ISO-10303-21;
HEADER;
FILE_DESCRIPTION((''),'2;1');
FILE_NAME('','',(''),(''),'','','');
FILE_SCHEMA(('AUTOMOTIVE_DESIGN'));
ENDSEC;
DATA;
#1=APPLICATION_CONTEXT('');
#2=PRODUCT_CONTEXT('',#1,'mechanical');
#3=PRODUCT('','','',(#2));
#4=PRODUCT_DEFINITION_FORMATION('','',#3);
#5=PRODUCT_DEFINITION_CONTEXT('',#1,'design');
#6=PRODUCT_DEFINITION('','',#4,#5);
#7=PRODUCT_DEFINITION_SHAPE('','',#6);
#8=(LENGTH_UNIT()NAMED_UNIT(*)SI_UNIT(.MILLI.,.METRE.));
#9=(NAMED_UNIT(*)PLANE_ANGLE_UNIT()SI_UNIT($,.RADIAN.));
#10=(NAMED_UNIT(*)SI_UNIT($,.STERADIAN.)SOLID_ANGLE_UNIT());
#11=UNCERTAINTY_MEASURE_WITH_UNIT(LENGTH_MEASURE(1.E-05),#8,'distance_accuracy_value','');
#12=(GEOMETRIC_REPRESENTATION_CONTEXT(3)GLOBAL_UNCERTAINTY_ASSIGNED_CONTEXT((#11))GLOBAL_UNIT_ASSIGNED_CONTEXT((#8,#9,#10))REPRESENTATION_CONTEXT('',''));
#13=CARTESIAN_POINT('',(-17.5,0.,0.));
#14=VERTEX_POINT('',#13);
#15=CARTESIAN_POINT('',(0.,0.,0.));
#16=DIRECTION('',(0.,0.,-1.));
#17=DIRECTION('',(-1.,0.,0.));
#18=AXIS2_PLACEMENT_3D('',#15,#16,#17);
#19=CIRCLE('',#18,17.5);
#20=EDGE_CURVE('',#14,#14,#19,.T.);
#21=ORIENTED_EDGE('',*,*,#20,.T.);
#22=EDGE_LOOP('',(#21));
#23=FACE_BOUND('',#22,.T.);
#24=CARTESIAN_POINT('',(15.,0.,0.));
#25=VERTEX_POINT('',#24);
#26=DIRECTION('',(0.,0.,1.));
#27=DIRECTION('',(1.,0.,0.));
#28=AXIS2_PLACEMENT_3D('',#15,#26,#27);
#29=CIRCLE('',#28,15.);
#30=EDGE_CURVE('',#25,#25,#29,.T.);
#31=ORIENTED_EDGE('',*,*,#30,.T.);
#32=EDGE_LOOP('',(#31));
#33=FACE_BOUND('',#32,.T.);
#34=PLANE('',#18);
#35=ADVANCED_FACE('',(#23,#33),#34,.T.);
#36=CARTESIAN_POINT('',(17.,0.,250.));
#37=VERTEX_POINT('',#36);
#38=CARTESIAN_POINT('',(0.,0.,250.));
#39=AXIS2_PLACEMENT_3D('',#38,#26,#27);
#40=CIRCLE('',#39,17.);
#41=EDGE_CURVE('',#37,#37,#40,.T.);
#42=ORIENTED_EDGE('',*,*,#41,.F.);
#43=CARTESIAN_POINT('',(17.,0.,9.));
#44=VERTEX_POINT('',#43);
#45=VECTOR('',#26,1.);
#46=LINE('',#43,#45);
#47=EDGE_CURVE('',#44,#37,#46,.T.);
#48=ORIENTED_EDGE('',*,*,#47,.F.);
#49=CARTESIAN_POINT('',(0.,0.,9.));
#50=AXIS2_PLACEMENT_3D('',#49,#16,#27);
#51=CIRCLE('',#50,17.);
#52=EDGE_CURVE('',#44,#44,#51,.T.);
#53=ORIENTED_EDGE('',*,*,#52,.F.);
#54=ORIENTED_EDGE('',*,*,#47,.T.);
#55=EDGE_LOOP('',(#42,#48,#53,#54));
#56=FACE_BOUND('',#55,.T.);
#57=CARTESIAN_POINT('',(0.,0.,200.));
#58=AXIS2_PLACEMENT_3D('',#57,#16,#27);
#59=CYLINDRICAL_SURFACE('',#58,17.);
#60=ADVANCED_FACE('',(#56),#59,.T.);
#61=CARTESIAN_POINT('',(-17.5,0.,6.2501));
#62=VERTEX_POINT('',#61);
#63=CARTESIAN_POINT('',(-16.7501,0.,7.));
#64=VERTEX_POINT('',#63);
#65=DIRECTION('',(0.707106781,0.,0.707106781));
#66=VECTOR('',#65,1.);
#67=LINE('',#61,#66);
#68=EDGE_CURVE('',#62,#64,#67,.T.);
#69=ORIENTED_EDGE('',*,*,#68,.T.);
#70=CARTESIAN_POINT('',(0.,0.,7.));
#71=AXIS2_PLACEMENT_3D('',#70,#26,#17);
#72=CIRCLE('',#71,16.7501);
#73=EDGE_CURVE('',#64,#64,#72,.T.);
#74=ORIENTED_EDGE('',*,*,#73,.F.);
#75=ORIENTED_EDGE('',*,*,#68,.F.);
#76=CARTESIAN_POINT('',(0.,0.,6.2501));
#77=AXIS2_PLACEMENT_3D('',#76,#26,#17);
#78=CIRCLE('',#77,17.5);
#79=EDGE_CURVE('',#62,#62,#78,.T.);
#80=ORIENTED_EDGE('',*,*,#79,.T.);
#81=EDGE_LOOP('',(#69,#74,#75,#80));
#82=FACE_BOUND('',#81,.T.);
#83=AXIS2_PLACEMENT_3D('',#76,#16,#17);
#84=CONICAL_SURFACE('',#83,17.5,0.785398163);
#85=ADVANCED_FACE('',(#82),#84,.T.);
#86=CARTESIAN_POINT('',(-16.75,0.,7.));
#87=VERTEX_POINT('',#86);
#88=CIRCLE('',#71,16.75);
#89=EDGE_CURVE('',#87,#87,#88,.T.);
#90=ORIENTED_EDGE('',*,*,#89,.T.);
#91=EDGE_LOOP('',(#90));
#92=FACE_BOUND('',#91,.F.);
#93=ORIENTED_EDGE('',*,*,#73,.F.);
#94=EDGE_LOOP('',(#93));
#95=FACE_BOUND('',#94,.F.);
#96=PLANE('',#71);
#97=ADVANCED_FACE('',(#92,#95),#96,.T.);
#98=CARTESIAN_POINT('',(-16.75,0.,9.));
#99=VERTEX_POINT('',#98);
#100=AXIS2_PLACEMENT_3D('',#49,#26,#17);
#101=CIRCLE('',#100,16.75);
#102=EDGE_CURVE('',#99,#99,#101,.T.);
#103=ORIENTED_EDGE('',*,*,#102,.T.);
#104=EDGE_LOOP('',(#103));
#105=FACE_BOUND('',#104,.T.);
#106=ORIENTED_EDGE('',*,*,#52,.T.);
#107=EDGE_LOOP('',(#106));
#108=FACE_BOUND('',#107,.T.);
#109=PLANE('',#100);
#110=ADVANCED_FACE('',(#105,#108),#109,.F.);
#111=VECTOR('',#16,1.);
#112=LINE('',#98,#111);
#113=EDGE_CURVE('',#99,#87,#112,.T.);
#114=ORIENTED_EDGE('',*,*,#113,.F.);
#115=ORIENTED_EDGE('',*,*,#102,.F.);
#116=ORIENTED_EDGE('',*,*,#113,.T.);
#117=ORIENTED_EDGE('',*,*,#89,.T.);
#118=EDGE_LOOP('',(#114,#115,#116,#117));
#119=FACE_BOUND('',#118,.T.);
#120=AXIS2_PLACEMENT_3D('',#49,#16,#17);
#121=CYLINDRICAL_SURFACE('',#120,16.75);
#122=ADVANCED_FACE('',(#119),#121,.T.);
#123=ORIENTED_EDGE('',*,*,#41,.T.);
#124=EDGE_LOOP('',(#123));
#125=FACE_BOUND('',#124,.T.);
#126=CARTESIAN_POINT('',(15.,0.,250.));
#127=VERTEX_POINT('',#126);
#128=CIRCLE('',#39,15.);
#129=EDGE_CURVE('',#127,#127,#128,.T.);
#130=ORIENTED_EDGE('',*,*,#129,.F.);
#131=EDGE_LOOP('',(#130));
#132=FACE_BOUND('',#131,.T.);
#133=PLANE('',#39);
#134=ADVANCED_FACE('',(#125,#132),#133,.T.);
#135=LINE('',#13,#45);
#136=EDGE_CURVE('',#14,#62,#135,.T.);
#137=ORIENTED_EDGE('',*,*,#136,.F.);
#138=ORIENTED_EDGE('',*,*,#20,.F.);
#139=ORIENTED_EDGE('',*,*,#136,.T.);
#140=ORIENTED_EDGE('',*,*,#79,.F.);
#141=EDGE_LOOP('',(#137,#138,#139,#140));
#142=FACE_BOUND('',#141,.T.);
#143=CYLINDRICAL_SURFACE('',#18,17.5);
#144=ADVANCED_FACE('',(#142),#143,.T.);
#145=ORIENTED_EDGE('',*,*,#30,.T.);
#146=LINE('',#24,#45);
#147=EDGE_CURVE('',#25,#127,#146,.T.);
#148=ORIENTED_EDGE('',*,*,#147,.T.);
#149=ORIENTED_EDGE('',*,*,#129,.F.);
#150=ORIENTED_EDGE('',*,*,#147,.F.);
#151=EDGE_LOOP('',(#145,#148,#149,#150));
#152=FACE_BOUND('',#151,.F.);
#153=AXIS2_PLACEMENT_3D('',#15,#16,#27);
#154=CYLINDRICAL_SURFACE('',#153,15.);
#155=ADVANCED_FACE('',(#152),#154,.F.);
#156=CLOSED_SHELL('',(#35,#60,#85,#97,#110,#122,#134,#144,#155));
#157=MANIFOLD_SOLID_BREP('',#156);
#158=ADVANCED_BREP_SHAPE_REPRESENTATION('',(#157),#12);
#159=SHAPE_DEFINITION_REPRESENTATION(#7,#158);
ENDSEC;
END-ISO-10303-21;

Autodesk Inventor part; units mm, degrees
ref_plane "YZ Plane" through (0, 0, 0) normal (1, 0, 0) x (0, 1, 0)
ref_plane "XZ Plane" through (0, 0, 0) normal (0, 1, 0) x (-1, 0, 0)
ref_plane "XY Plane" through (0, 0, 0) normal (0, 0, 1) x (1, 0, 0)
sketch "Skizze1" plane through (0, 0, 0) normal (0, 0, 1) x (1, 0, 0)
  circle A0 centre (0, 0) radius 15
  circle A1 centre (0, 0) radius 17.5
  dimension "d0" = 35
  dimension "d1" = 2.5
extrude "Extrusion1" add sketch "Skizze1" along normal blind 250
sketch "Skizze2" plane through (0, 0, 250) normal (0, 0, 1) x (1, 0, 0)
  circle A0 centre (0, 0) radius 17.5 projected
  circle A1 centre (0, 0) radius 17
  dimension "d4" = 34
extrude "Extrusion2" cut sketch "Skizze2" against normal through all
sketch "Skizze3" plane through (0, 0, 0) normal (0, 0, -1) x (-1, 0, 0)
  circle A0 centre (0, 0) radius 17 projected
  circle A1 centre (0, 0) radius 15 projected
  circle A2 centre (0, 0) radius 17.5
  dimension "d7" = 35
extrude "Extrusion3" add sketch "Skizze3" against normal blind 9 contours A2
sketch "Skizze4" plane through (0, 0, 250) normal (0, 0, 1) x (1, 0, 0)
  circle A0 centre (0, 0) radius 17 projected
  circle A1 centre (0, 0) radius 15 projected
  circle A2 centre (0, 0) radius 16.5
  dimension "d10" = 33
extrude "Extrusion4" cut sketch "Skizze4" against normal blind 50 contours A0
sketch "Skizze5" plane through (0, 0, 0) normal (0, 1, 0) x (-1, 0, 0)
  line L0 (-17.5, 9) -> (17.5, 9) projected
  line L1 (17.5, 0) -> (-17.5, 0) projected
  line L2 (17, 9) -> (-17, 9) projected
  line L3 (17.5, 0) -> (17.5, 9) projected
  line L4 (15, 0) -> (15, 250) projected
  line L5 (17, 200) -> (17, 9) projected
  line L6 (17.5, 9) -> (16.75, 9)
  line L7 (16.75, 9) -> (16.75, 7)
  line L8 (16.75, 7) -> (17.5, 7)
  line L9 (17.5, 7) -> (17.5, 9)
  line L10 (24.5, 0) -> (-24.5, 0) projected
  line L11 (0, -50) -> (0, 300) projected
  point P0 (0, 0)
  point P1 (-9.75, 200)
  point P2 (9.75, 200)
  dimension "d13" = 2
  dimension "d14" = 33.5
revolve "Umdrehung1" cut sketch "Skizze5" angle 360 about axis through (0, 0, -10) along (0, 0, 1) contours L0 L3 L8 L7
chamfer "Fase1" distance 0.75 angle 45 1 edges at (17.5, 0, 7)
thread "Gewinde5" size "M35x1.5" class "6g" standard "ANSI Metric M Profile" full length
sketch "Skizze6" plane through (0, 0, 200) normal (0, 0, 1) x (1, 0, 0)
  circle A0 centre (0, 0) radius 16.5 projected
  circle A1 centre (0, 0) radius 17 projected
extrude "Extrusion5" add sketch "Skizze6" along normal blind 50
properties part number "13_0204_027"
